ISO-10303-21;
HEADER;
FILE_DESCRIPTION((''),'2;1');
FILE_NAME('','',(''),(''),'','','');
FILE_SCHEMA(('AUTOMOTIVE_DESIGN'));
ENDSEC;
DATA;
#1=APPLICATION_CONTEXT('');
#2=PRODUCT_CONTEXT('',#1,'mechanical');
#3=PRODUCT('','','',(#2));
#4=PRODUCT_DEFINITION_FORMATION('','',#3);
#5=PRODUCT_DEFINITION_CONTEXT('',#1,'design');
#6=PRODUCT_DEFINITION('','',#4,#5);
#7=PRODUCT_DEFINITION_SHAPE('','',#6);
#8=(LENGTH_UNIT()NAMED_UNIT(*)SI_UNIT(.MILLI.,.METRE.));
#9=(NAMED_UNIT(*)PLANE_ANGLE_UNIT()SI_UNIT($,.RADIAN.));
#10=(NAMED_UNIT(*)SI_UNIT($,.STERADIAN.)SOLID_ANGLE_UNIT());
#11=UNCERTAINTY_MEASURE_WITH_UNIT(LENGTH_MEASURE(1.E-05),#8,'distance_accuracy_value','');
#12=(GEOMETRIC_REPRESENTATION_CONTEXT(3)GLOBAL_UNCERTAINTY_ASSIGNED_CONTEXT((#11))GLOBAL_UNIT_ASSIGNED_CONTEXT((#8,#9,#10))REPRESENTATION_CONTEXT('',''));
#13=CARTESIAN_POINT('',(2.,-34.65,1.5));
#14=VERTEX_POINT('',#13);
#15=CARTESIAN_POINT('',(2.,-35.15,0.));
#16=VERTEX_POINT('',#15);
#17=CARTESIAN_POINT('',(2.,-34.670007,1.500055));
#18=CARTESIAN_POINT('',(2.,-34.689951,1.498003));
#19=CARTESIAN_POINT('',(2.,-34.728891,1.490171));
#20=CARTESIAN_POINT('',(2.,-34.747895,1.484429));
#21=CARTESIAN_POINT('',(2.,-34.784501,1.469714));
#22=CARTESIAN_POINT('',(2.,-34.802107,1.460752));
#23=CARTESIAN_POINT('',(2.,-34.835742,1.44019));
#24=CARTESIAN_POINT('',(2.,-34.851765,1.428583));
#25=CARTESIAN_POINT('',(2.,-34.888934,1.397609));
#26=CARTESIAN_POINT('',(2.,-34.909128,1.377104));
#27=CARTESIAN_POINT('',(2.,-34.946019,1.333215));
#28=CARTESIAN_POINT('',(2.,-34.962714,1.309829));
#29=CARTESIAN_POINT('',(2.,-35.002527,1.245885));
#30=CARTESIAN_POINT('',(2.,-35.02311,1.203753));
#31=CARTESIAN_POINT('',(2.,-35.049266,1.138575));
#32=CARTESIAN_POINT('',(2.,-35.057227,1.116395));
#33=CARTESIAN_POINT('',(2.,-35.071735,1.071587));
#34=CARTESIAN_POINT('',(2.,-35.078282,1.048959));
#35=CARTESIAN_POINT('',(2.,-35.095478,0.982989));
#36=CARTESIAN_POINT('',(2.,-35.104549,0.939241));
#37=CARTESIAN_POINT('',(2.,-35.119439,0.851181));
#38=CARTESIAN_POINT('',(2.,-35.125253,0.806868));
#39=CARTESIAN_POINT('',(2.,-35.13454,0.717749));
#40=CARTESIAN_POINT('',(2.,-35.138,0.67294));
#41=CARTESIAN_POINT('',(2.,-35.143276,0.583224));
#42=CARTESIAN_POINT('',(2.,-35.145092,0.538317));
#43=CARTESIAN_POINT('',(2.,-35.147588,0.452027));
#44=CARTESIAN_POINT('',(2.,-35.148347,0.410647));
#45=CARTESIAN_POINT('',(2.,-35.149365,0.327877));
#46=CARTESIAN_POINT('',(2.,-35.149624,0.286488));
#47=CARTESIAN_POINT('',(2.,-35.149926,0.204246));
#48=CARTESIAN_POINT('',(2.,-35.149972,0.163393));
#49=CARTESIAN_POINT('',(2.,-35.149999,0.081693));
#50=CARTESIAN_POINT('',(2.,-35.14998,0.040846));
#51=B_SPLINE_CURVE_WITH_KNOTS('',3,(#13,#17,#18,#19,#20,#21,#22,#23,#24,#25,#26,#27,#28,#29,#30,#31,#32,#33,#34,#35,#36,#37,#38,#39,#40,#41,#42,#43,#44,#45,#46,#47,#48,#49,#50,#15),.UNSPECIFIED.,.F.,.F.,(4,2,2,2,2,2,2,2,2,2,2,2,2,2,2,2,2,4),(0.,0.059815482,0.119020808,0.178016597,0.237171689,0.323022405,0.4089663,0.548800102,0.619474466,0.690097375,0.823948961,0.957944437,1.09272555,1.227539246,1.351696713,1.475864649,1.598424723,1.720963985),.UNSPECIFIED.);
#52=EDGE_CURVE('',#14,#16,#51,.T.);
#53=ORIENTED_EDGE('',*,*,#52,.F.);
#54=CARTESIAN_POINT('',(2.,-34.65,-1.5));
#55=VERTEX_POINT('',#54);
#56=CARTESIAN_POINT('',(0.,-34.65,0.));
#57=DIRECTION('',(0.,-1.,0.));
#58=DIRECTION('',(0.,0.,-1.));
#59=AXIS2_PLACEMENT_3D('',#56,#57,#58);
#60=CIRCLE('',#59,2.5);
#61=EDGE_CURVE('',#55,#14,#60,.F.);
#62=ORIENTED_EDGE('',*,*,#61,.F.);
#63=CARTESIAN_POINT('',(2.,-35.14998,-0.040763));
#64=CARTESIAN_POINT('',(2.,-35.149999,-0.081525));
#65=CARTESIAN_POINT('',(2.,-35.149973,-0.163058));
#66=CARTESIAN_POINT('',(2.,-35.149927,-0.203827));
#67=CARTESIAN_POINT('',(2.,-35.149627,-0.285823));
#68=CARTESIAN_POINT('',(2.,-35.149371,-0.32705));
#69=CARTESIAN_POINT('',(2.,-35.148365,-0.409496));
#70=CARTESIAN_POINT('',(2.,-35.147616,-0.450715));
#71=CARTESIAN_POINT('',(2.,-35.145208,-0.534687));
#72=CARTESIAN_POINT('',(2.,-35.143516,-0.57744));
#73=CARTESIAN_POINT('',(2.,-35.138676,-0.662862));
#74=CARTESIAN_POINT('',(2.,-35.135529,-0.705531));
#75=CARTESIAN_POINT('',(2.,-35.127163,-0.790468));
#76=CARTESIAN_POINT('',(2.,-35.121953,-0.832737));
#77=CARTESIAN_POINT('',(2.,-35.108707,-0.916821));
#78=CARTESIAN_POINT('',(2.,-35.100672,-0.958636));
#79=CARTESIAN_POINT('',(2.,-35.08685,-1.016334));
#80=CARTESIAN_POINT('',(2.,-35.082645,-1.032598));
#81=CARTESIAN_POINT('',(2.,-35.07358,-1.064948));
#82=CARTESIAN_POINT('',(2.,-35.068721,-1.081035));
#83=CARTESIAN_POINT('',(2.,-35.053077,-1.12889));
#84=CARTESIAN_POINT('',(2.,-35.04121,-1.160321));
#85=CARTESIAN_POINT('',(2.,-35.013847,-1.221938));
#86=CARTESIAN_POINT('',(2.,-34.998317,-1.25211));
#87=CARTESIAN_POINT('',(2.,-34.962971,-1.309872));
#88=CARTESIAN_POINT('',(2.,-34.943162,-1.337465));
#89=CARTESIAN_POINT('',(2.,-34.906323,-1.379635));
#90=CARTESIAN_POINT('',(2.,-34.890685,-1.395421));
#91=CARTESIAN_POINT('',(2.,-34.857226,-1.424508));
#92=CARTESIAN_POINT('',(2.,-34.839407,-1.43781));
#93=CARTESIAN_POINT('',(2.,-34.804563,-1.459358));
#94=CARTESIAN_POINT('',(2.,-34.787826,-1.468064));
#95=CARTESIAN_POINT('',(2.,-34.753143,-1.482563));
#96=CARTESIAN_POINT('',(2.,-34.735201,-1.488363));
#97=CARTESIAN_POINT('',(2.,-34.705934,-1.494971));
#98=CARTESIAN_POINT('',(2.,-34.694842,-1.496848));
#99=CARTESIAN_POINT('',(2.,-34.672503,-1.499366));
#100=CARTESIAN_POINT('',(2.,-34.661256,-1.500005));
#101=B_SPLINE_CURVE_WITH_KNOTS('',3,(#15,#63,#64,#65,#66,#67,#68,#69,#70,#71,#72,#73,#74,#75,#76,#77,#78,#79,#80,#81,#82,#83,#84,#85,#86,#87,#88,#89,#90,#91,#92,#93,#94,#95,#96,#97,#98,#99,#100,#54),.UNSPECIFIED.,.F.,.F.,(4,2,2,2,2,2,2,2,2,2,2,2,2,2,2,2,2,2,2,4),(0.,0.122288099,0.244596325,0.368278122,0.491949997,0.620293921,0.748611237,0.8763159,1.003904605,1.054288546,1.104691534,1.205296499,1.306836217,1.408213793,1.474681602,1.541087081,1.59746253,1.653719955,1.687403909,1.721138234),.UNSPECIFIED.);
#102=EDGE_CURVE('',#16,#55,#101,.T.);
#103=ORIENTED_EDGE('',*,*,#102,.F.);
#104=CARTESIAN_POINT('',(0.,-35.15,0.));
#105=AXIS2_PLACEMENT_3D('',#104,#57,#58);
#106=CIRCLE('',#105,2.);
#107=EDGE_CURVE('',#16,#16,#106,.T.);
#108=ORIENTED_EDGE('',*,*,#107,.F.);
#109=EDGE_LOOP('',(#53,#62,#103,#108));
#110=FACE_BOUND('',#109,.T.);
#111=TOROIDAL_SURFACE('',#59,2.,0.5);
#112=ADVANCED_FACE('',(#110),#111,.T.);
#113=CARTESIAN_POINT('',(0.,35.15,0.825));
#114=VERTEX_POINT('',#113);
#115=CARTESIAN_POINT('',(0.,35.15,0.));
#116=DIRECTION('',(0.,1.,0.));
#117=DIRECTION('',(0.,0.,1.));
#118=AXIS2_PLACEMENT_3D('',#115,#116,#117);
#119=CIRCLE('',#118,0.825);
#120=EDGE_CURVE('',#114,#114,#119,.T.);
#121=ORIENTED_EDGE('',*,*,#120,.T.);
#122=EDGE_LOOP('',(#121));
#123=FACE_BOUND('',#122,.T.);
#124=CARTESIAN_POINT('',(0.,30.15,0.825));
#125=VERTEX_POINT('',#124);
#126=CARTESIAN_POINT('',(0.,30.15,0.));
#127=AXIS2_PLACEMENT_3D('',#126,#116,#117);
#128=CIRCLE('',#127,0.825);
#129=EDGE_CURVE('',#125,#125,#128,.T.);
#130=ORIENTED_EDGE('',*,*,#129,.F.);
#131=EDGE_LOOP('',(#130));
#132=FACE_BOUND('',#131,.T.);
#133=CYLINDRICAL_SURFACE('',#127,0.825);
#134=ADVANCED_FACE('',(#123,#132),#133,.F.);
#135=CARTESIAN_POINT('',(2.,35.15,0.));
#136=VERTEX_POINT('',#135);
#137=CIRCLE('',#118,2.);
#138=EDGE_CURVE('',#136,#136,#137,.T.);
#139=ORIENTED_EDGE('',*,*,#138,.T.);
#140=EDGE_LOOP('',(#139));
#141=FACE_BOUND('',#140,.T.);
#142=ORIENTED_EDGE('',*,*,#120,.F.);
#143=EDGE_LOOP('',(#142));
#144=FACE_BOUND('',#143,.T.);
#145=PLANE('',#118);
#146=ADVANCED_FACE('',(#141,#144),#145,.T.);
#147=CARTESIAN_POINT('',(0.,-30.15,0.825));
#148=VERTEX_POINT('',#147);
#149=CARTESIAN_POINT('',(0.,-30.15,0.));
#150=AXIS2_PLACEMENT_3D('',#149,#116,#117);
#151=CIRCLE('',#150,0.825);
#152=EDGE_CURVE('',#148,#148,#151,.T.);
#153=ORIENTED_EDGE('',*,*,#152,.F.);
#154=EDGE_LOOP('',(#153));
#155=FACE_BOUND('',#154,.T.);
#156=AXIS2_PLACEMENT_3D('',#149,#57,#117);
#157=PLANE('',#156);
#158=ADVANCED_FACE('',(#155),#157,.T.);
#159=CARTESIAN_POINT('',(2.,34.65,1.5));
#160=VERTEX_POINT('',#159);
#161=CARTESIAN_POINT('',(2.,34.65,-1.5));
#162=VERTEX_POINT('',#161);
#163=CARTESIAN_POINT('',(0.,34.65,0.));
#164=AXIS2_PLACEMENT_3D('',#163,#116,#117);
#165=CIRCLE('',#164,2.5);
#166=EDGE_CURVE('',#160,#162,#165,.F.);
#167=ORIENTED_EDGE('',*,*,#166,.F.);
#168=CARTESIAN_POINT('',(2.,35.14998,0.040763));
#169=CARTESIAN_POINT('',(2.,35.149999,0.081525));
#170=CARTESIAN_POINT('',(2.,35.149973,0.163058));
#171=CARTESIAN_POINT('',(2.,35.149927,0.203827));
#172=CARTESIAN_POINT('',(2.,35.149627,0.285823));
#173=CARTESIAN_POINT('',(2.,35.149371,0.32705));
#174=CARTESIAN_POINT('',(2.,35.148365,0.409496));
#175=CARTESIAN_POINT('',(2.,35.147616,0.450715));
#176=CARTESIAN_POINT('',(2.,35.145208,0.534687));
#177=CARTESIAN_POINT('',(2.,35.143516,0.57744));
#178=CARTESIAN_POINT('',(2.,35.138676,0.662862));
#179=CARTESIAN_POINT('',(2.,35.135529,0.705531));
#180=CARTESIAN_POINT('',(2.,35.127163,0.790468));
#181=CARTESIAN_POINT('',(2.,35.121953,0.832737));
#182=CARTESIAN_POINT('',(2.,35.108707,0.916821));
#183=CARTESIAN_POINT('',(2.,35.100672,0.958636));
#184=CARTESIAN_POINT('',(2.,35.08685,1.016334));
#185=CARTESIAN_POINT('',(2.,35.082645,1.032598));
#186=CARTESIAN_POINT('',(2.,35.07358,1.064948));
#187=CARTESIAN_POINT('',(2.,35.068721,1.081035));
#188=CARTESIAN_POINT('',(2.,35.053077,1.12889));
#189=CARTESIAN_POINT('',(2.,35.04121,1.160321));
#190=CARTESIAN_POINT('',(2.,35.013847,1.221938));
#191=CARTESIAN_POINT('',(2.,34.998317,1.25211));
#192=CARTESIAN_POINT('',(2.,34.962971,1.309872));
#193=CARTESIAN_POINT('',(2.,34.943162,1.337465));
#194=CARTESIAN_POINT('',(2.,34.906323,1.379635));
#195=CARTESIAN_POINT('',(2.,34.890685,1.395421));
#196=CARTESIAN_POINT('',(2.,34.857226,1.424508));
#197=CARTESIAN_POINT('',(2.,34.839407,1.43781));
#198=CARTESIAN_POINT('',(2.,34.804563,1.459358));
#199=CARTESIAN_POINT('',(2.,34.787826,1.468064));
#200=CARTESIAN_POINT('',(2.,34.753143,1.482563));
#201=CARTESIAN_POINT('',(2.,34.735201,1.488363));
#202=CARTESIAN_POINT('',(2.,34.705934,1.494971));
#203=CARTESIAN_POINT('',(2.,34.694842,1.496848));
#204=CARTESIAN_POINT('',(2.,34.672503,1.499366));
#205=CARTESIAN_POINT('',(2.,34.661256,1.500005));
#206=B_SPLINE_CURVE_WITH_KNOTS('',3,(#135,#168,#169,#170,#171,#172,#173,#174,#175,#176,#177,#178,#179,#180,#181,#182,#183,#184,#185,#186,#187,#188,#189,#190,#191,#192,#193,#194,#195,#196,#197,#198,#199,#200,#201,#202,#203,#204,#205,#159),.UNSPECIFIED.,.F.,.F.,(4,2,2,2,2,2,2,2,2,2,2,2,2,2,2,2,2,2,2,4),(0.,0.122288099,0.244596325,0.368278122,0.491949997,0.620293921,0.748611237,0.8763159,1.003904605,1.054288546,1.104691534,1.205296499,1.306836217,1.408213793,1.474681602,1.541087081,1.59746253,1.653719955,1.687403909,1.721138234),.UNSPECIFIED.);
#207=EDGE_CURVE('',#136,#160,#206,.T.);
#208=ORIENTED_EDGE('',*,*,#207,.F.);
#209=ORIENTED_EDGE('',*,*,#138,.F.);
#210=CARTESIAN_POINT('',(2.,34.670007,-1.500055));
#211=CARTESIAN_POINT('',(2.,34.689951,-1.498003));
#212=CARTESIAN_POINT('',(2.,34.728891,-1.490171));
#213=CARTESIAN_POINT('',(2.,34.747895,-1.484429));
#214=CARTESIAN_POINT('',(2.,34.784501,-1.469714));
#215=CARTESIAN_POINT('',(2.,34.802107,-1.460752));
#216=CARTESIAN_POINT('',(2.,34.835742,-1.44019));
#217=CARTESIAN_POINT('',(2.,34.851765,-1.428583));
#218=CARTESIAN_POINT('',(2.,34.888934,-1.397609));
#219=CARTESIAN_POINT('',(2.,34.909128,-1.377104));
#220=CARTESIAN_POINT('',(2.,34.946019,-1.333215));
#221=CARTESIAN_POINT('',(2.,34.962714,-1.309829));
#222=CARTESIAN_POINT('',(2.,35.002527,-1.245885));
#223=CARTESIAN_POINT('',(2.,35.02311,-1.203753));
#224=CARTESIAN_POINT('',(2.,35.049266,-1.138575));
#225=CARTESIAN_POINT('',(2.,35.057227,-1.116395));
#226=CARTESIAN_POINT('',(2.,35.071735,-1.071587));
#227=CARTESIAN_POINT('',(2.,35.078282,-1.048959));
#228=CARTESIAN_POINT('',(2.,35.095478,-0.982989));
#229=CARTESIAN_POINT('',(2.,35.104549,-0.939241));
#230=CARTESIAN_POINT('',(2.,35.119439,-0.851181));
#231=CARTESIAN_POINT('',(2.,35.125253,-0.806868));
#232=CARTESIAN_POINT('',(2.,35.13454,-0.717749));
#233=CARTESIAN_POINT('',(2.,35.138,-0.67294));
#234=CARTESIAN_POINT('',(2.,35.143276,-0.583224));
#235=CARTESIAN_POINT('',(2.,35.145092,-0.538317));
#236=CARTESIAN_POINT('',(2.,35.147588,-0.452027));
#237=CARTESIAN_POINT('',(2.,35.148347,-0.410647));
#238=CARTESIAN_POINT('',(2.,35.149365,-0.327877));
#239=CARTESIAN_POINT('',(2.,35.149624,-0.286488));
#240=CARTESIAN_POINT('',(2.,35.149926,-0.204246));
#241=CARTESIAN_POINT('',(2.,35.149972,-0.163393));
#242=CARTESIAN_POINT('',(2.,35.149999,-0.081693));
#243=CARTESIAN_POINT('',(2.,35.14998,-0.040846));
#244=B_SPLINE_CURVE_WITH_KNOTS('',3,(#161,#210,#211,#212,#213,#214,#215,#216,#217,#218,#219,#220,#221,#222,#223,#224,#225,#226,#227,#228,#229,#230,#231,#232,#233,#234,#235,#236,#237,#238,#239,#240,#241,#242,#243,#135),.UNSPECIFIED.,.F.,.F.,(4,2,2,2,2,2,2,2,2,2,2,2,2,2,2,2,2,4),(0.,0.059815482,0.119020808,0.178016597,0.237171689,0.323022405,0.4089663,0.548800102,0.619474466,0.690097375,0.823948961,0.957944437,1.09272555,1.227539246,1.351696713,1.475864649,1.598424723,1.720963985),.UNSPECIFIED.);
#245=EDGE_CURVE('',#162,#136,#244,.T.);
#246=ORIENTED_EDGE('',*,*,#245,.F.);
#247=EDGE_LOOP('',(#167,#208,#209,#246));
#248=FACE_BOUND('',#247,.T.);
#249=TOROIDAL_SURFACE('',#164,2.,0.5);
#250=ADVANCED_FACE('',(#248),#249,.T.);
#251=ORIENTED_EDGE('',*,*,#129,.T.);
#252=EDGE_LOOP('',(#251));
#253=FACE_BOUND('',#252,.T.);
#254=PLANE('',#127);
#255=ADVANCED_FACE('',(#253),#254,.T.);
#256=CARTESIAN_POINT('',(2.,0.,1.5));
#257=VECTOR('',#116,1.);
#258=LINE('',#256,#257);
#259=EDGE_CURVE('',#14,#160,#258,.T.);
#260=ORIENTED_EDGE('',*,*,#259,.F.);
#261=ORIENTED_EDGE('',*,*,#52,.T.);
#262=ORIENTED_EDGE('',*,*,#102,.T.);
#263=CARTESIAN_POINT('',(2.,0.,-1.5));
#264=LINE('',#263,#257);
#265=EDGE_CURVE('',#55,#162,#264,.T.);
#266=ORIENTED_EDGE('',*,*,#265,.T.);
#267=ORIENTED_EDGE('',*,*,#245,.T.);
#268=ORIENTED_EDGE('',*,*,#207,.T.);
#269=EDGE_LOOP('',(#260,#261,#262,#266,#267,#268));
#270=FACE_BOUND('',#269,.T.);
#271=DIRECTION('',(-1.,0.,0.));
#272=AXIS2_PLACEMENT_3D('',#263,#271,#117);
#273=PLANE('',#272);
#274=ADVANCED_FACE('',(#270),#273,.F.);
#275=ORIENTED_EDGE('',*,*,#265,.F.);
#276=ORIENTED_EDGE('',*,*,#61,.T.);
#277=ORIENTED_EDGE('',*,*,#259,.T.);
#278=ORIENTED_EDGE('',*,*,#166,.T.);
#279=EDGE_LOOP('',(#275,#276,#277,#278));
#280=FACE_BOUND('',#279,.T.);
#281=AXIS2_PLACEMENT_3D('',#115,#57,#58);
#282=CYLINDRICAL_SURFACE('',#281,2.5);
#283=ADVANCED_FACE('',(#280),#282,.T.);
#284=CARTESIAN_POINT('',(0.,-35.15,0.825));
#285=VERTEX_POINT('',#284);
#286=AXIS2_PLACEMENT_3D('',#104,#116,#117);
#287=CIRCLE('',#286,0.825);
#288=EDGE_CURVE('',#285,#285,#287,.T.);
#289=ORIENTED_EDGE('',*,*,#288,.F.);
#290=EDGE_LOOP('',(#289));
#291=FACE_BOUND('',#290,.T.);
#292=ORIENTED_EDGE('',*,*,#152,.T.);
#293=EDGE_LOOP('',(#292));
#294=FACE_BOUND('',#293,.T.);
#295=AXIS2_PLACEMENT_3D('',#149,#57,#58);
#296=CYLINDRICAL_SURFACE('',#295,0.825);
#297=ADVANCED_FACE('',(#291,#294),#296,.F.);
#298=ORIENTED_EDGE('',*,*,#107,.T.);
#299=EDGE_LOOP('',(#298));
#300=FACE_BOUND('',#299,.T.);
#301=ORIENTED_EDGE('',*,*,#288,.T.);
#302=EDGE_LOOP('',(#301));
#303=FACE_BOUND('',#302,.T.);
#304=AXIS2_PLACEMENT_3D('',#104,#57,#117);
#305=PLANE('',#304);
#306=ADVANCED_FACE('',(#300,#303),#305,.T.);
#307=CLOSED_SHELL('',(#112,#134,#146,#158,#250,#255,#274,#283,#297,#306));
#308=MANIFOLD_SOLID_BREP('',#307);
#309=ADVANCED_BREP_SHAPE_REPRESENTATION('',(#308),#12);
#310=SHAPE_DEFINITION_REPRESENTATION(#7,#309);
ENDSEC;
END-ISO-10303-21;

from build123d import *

# Parameters (mm, degrees)
SKETCH1_R            = 2.5
BOSS_EXTRUDE1_DEPTH  = 35.15
SKETCH2_R            = 0.825
CUT_EXTRUDE1_DEPTH   = 5
CUT_EXTRUDE2_DEPTH   = 36.327361917
FILLET1_R            = 0.5
FILLET1_OF_MIRROR1_R = 0.5


with BuildPart() as part:
    # Sketch1 → Boss-Extrude1 (new body)
    with BuildSketch(Plane(origin=(0, 0, 0), x_dir=(1, 0, 0), z_dir=(0, 1, 0))):
        with Locations(Location((0, 0, 0), (0, 0, 270))):
            Circle(SKETCH1_R)
    boss_extrude1 = extrude(amount=BOSS_EXTRUDE1_DEPTH)

    # Sketch2 → Cut-Extrude1 (cut)
    with BuildSketch(Plane(origin=(0, 35.15, 0), x_dir=(1, 0, 0), z_dir=(0, 1, 0))):
        with Locations(Location((0, 0, 0), (0, 0, 270))):
            Circle(SKETCH2_R)
    cut_extrude1 = extrude(amount=-CUT_EXTRUDE1_DEPTH, mode=Mode.SUBTRACT)

    # Sketch3 → Cut-Extrude2 (cut, through all)
    with BuildSketch(Plane(origin=(0, 35.15, 0), x_dir=(1, 0, 0), z_dir=(0, 1, 0))):
        with BuildLine():
            Line((2, 1.5), (2, -1.5))
            ThreePointArc((2, -1.5), (2.5, 0), (2, 1.5))
        make_face()
    cut_extrude2 = extrude(amount=-CUT_EXTRUDE2_DEPTH, mode=Mode.SUBTRACT)

    # Fillet1
    fillet1_edges = [part.edges().sort_by_distance(p)[0] for p in [
        (-2.5, 35.15, 0),
    ]]
    fillet(fillet1_edges, radius=FILLET1_R - 0.0001)  # a hair under: the kernel refuses the full size

    # Mirror1: Boss-Extrude1, Cut-Extrude1, Cut-Extrude2 across plane
    add(boss_extrude1.mirror(Plane.ZX))
    add(cut_extrude1.mirror(Plane.ZX), mode=Mode.SUBTRACT)
    add(cut_extrude2.mirror(Plane.ZX), mode=Mode.SUBTRACT)

    # Fillet1 of Mirror1
    fillet1_of_mirror1_edges = [part.edges().sort_by_distance(p)[0] for p in [
        (-2.5, -35.15, 0),
    ]]
    fillet(fillet1_of_mirror1_edges, radius=FILLET1_OF_MIRROR1_R - 0.0001)  # a hair under: the kernel refuses the full size


solid = part.part
